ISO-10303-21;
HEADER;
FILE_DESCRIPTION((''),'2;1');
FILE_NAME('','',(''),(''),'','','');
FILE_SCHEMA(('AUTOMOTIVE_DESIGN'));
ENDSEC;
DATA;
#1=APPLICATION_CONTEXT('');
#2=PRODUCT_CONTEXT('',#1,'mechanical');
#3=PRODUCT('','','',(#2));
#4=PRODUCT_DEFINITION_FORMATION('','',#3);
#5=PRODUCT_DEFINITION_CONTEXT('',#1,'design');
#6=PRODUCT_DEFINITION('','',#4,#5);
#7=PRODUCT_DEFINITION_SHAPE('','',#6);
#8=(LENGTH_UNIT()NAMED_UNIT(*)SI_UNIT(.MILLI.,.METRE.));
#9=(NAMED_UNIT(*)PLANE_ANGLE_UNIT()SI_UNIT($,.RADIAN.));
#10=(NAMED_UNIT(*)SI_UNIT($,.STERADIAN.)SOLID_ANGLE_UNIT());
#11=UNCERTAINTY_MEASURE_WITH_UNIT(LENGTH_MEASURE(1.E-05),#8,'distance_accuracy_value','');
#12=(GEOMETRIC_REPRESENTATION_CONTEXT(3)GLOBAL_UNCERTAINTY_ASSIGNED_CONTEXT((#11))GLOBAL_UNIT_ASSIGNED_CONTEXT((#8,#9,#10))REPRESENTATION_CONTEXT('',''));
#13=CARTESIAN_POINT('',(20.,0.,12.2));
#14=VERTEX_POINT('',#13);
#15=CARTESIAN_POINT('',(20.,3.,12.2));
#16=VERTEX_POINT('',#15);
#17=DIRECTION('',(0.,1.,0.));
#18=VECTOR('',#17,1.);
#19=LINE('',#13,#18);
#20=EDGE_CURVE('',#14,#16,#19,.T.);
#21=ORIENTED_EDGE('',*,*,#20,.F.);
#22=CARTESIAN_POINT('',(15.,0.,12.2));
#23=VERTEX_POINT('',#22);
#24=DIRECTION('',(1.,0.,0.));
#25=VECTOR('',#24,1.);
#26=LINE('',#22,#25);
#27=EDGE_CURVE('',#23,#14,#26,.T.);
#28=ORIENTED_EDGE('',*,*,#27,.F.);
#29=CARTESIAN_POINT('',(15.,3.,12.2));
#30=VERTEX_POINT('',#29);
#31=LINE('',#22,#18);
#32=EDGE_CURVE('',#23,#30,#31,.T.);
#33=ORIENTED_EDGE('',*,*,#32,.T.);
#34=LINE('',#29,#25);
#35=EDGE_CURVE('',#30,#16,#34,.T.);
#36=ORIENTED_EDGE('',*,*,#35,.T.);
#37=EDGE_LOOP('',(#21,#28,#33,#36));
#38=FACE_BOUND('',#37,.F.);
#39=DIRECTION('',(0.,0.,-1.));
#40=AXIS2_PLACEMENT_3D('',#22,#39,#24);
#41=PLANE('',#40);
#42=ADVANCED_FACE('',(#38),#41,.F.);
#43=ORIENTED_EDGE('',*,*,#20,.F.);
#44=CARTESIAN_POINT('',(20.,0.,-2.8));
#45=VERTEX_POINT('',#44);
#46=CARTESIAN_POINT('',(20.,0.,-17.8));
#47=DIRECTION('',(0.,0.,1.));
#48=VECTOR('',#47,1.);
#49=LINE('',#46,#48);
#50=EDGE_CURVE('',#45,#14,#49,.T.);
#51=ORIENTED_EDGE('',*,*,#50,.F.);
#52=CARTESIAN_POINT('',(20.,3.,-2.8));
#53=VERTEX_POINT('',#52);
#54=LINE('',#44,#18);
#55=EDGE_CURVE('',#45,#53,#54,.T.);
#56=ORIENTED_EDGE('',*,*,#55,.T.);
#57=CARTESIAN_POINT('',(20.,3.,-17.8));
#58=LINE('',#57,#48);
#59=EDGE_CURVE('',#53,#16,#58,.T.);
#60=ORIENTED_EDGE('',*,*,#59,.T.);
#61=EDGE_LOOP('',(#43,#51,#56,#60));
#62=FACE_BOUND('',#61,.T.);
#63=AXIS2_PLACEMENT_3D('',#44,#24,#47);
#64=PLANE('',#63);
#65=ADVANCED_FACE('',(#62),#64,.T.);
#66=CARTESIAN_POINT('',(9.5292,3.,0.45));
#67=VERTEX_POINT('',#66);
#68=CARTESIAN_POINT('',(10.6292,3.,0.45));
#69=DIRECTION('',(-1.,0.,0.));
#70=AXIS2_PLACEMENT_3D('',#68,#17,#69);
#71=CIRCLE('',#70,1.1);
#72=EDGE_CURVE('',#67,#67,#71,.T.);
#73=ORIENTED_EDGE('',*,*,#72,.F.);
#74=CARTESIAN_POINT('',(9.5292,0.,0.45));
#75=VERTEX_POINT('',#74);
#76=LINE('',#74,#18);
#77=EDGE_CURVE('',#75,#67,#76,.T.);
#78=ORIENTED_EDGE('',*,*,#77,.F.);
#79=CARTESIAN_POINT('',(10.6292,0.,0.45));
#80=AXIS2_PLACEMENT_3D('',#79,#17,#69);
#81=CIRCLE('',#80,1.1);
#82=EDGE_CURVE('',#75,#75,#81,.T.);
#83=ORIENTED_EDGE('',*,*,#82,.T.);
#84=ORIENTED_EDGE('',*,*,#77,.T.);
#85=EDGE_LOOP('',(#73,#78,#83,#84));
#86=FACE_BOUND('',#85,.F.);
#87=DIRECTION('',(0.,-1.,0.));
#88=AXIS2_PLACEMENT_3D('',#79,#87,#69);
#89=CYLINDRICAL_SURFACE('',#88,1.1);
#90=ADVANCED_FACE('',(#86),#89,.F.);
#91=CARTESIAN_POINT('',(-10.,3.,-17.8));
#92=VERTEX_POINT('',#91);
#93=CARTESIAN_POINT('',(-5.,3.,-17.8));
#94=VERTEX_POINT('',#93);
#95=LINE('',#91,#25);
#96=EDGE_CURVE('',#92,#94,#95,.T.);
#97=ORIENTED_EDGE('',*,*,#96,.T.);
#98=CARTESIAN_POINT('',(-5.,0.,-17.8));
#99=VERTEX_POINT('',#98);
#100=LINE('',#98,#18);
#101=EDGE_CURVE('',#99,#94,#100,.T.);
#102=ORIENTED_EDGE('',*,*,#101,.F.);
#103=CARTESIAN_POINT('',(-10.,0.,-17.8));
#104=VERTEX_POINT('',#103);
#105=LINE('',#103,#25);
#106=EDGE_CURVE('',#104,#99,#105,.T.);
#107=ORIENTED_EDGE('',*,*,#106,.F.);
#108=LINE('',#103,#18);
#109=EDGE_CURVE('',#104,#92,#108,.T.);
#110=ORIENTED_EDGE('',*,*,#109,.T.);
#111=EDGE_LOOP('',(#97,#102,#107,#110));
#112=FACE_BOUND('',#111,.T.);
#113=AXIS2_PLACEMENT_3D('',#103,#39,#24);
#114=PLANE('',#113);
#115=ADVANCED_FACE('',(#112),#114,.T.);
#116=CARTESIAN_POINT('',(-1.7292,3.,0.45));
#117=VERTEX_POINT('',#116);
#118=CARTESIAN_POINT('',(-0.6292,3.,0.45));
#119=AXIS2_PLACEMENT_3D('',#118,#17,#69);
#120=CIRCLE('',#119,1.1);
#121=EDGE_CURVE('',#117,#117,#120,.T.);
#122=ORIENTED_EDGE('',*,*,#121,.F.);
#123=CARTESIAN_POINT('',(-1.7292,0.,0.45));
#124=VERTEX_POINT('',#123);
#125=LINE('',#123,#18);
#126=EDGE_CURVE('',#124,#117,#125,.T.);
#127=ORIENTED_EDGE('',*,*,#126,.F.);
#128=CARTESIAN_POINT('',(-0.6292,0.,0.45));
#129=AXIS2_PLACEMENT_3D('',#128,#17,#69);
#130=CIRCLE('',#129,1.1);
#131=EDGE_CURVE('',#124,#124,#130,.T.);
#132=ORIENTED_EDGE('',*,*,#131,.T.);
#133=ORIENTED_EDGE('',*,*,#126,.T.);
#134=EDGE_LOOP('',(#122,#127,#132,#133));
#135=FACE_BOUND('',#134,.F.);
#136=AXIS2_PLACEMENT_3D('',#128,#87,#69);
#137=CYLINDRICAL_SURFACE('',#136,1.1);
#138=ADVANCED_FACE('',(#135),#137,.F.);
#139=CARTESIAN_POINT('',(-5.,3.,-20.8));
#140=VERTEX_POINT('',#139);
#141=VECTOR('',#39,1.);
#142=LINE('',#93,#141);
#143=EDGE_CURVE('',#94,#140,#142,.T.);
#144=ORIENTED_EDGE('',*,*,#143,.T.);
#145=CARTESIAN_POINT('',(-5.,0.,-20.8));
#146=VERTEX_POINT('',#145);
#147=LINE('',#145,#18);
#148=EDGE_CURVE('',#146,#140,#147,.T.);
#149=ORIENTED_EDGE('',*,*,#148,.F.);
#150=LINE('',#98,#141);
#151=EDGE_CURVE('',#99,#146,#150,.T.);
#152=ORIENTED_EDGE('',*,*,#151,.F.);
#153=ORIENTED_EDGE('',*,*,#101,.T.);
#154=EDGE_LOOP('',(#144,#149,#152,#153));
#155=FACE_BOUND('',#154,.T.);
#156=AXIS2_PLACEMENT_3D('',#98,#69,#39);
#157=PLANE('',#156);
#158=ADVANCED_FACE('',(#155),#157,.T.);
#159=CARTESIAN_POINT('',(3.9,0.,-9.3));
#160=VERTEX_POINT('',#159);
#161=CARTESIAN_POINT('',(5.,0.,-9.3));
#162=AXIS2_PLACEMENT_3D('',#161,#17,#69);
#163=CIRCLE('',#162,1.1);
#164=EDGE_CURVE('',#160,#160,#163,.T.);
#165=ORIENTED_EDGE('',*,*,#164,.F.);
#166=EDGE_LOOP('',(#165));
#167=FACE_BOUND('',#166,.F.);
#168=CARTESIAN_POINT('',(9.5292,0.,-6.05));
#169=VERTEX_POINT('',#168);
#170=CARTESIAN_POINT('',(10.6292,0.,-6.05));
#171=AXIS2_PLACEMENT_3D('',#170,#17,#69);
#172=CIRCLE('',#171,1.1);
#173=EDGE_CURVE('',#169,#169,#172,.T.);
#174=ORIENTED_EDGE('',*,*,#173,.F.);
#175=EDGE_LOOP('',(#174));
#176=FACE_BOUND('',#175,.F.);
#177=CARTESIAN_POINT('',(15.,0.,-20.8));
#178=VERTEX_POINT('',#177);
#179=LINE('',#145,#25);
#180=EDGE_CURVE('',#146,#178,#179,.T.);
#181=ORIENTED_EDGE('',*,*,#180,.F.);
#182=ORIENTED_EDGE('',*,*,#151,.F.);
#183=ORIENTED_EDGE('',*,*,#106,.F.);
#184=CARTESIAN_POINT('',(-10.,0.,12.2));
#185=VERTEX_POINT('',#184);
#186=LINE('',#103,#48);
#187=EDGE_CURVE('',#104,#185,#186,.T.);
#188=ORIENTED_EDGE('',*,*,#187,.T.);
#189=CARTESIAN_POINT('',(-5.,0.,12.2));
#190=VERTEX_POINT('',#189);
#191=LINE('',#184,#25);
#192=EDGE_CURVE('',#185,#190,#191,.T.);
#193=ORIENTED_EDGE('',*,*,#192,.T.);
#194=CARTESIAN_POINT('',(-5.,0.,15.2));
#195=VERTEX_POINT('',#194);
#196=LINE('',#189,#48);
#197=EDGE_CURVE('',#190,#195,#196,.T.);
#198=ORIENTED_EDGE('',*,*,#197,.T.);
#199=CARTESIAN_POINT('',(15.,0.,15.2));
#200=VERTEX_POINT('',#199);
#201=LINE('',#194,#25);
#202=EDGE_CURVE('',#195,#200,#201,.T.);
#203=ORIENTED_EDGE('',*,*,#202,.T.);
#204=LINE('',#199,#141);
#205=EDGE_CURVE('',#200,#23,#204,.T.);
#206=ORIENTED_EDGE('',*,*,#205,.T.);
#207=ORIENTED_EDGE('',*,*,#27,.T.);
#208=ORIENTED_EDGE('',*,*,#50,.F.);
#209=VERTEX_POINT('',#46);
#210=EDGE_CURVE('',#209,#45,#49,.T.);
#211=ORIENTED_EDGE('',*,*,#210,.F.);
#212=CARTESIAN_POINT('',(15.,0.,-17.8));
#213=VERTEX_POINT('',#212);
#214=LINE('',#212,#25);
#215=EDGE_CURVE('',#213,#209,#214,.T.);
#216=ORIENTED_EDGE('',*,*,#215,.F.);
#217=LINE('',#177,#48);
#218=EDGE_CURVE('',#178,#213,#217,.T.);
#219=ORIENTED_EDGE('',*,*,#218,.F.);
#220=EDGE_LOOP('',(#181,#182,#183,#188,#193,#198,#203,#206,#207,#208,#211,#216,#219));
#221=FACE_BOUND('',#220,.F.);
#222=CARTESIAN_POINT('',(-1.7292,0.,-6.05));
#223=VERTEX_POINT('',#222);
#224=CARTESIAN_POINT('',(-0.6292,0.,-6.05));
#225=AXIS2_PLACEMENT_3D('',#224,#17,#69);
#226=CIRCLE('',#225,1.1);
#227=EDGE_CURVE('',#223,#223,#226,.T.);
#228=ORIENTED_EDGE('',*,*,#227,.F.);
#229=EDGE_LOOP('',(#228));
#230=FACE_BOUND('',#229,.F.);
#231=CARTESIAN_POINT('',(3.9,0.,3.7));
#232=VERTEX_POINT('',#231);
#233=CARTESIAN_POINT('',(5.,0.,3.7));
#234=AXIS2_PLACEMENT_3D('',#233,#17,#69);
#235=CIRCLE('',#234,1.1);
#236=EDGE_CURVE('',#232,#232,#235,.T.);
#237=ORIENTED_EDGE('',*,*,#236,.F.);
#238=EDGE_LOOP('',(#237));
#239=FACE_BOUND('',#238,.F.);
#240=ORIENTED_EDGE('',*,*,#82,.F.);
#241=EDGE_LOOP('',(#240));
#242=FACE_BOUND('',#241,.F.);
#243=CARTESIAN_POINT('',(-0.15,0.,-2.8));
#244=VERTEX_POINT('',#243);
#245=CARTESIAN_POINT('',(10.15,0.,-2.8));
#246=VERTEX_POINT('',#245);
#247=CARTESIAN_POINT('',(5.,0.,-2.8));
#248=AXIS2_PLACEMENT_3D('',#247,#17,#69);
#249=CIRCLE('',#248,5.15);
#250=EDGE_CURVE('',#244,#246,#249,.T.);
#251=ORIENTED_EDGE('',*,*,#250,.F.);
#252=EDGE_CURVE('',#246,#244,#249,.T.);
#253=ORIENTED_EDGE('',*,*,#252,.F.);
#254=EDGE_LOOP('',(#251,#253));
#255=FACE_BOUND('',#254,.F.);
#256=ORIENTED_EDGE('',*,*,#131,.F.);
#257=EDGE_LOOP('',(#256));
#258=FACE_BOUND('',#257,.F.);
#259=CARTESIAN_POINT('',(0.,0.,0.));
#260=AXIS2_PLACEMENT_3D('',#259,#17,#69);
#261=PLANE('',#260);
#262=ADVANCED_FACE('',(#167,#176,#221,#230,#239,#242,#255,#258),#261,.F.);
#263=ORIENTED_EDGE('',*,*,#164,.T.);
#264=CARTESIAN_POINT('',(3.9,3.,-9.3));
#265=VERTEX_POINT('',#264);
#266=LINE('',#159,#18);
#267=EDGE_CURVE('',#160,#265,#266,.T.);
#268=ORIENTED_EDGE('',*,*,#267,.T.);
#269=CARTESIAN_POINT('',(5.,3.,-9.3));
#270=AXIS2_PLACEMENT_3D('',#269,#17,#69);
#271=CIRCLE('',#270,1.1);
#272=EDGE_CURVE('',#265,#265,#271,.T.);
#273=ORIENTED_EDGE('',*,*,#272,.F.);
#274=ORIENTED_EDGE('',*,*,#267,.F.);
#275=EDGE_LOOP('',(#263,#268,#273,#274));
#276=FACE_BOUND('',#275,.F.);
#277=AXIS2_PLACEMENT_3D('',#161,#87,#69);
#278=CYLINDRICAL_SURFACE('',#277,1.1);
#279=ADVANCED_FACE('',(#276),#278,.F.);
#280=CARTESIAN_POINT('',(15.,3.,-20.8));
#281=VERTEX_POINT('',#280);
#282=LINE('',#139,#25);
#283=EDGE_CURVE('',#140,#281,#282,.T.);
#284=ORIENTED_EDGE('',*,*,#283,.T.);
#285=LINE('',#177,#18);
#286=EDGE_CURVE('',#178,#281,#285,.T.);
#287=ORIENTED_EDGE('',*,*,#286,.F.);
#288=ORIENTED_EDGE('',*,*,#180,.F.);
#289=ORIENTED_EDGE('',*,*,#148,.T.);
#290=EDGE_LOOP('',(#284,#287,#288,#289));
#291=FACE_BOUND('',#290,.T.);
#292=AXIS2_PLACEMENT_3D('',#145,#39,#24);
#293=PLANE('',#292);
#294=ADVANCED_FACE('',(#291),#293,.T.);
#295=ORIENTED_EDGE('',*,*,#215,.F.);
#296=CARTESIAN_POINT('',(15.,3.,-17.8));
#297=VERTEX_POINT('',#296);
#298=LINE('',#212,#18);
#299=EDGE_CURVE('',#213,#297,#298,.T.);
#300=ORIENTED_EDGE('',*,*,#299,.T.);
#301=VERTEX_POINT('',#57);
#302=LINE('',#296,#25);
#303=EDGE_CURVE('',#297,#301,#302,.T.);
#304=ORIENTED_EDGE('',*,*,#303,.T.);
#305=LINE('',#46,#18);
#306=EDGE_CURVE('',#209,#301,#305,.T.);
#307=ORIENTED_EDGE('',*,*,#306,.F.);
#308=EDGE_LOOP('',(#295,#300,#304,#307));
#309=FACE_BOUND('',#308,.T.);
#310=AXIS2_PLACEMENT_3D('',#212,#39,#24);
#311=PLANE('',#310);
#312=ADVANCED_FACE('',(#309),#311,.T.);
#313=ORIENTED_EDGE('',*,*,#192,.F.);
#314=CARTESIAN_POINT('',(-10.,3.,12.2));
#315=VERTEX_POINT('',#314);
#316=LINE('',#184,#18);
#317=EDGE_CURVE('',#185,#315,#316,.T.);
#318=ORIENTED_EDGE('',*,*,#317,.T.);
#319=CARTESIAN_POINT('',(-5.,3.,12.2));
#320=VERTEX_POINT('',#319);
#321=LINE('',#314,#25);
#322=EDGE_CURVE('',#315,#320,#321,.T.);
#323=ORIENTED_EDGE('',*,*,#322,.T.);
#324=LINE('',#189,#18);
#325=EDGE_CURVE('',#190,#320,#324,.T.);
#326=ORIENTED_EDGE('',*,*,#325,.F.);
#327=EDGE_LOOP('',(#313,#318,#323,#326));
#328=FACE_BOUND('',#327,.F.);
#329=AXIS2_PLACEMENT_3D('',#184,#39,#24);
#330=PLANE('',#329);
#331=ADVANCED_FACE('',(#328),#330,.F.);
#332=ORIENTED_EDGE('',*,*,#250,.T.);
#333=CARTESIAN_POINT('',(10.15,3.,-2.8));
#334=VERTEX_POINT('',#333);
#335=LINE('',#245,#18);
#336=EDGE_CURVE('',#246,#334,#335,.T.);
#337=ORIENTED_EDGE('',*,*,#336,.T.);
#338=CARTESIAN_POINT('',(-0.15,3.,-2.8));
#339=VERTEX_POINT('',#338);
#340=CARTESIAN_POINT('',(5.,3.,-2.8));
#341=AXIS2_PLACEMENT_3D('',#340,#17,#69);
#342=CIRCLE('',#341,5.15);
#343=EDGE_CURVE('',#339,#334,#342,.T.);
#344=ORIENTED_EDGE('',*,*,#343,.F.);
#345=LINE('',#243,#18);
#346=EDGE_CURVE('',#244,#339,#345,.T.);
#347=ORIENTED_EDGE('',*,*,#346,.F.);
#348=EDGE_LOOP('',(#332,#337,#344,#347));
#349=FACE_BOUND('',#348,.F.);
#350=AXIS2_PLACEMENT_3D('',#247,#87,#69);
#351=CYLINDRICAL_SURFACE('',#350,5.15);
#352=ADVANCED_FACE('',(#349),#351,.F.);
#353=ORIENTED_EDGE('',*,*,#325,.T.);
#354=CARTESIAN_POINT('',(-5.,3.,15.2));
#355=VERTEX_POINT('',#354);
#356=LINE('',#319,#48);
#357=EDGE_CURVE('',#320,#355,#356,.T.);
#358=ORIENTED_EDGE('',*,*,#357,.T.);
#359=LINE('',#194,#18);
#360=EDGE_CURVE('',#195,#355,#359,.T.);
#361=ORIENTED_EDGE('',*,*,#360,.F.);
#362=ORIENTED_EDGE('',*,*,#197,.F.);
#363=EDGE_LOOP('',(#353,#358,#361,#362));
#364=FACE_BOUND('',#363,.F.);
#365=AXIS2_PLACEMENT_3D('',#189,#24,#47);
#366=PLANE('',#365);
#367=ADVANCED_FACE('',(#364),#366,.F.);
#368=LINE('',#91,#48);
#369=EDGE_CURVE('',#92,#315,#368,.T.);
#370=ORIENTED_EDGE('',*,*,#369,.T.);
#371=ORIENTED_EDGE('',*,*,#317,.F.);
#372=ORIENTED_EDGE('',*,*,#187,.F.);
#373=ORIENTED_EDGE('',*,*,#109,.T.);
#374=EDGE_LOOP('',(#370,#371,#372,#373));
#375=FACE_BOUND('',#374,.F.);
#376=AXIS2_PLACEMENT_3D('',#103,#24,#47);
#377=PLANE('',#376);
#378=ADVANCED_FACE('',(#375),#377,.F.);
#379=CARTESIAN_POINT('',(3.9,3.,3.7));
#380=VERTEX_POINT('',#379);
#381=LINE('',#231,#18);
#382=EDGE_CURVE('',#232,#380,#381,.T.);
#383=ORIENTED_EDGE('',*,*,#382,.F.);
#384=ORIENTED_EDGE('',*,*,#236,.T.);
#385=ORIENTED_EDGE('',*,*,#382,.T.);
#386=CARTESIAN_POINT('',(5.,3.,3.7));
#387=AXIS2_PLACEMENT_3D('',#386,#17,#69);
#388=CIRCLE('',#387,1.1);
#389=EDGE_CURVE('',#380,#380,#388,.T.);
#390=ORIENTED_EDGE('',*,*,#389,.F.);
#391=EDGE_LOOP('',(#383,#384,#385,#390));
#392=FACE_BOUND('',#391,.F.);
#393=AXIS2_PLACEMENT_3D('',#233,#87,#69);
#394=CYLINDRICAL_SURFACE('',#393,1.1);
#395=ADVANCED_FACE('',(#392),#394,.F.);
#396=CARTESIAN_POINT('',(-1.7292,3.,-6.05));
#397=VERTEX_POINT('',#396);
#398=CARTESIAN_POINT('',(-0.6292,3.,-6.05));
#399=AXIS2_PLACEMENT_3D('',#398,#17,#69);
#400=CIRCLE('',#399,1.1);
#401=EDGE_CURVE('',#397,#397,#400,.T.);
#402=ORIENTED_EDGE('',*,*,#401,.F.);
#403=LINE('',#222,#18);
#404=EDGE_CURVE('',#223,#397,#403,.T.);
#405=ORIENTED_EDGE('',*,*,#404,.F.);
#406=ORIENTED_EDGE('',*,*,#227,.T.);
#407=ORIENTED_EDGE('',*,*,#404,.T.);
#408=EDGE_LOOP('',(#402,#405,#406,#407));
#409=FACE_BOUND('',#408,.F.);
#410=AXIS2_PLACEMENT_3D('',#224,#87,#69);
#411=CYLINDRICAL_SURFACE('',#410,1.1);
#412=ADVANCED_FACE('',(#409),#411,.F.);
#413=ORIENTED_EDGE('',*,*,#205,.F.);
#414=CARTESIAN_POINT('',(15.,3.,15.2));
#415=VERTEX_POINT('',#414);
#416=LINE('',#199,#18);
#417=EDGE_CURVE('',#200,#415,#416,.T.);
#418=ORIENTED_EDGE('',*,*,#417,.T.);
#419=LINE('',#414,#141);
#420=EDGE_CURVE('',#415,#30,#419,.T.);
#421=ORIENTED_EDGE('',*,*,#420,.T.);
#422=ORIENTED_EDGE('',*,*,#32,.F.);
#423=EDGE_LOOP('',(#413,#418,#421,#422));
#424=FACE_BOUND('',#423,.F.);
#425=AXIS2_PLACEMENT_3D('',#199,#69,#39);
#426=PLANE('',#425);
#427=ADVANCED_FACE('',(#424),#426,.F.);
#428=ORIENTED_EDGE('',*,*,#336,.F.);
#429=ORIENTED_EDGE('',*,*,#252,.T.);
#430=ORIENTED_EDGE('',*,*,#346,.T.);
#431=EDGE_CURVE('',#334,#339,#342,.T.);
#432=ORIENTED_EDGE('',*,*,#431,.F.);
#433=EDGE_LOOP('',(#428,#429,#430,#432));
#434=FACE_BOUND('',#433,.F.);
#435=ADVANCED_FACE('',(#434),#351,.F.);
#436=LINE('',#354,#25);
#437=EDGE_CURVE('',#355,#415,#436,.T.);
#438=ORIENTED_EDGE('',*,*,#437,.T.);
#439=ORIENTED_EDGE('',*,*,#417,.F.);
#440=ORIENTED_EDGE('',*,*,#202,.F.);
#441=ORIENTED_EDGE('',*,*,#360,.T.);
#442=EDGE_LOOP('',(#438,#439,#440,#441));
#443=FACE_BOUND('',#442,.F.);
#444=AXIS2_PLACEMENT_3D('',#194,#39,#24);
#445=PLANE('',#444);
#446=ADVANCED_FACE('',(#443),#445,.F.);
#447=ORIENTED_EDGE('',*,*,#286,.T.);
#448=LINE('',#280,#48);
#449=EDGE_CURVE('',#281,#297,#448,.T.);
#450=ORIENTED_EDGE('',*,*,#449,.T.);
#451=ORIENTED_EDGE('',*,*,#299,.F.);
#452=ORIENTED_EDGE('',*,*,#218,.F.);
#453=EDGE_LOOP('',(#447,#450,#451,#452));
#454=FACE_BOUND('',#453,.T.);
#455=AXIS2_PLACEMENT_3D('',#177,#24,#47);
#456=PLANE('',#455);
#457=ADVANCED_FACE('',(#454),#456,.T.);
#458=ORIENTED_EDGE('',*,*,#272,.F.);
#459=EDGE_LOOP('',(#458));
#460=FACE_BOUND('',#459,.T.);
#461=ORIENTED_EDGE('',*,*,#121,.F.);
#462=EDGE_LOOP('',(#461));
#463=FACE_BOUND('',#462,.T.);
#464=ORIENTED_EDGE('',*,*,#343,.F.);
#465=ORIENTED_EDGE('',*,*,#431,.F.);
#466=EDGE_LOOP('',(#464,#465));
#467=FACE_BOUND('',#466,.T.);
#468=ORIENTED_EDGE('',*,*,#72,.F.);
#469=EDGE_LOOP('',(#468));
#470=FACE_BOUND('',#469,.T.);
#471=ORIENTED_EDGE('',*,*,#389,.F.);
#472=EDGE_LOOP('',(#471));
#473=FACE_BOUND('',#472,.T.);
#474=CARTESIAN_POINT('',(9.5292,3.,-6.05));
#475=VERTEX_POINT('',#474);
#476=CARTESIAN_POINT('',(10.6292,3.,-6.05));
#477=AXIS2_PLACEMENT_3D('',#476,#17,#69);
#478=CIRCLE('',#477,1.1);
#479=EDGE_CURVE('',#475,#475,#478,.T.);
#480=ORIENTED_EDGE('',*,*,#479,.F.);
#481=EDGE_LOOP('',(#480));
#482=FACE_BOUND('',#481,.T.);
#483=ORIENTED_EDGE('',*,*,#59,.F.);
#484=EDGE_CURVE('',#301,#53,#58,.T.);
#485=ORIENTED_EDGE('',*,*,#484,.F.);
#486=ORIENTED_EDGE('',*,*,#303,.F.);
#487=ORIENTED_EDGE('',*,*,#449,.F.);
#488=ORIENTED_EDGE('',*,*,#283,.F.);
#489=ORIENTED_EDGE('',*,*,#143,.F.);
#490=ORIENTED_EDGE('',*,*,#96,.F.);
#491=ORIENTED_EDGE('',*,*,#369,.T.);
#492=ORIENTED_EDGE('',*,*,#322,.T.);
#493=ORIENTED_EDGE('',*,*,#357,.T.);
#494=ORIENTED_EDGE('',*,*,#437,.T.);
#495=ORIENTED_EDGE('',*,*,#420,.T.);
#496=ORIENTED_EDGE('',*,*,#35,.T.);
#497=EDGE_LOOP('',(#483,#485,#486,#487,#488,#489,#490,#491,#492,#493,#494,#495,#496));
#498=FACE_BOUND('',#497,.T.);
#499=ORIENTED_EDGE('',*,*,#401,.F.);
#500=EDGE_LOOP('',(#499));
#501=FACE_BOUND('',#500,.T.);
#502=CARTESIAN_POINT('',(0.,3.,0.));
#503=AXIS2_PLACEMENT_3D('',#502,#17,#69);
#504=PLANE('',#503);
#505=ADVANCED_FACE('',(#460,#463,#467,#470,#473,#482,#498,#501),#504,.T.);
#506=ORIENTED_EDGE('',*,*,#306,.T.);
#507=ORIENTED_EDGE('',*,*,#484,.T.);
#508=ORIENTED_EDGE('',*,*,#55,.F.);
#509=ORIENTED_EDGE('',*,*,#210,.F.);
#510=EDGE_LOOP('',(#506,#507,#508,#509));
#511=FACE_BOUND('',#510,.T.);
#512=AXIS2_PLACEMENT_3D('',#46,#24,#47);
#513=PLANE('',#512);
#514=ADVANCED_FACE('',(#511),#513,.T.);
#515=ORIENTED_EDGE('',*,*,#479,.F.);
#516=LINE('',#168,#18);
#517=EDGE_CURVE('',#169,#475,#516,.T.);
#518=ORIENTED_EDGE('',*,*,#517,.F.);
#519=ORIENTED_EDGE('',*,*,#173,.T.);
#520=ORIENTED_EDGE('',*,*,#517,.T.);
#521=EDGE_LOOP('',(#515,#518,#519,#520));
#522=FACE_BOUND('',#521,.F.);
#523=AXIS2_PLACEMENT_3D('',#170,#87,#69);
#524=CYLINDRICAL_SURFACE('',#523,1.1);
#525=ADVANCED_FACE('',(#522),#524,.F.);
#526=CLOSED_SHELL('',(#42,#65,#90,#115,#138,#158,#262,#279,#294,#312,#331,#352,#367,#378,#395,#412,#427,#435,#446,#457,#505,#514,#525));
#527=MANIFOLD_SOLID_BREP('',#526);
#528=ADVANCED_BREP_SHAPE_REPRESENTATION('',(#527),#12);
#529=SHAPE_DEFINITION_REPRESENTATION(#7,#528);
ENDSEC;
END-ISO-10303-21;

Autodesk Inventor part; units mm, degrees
ref_plane "YZ Plane" through (0, 0, 0) normal (1, 0, 0) x (0, 1, 0)
ref_plane "XZ Plane" through (0, 0, 0) normal (0, 1, 0) x (-1, 0, 0)
ref_plane "XY Plane" through (0, 0, 0) normal (0, 0, 1) x (1, 0, 0)
sketch "Sketch1" plane through (0, 0, 0) normal (0, 1, 0) x (-1, 0, 0)
  circle A0 centre (-5, -2.8) radius 5.15
  line L0 (10, -17.8) -> (10, 12.2)
  line L1 (-20, -17.8) -> (-20, 12.2)
  line L2 (10, 12.2) -> (5, 12.2)
  line L3 (5, 12.2) -> (5, 15.2)
  line L4 (-15, 15.2) -> (-15, 12.2)
  circle A1 centre (-5, 3.7) radius 1.1
  circle A2 centre (-10.6292, 0.45) radius 1.1
  circle A3 centre (-10.6292, -6.05) radius 1.1
  circle A4 centre (-5, -9.3) radius 1.1
  circle A5 centre (0.6292, -6.05) radius 1.1
  circle A6 centre (0.6292, 0.45) radius 1.1
  line L5 (-15, 12.2) -> (-20, 12.2)
  line L6 (5, 15.2) -> (-15, 15.2)
  line L7 (10, -17.8) -> (5, -17.8)
  line L8 (5, -17.8) -> (5, -20.8)
  line L9 (5, -20.8) -> (-15, -20.8)
  line L10 (-15, -20.8) -> (-15, -17.8)
  line L11 (-15, -17.8) -> (-20, -17.8)
  line L12 (-20, -17.8) -> (-20, -2.8)
  line L13 (-20, -2.8) -> (-5, -2.8)
  dimension "d7" = 360
  dimension "d42" = 30
  dimension "d43" = 5
  dimension "d44" = 3
  dimension "d49" = 2.2
  dimension "d52" = 360
  dimension "d57" = 30
  dimension "d59" = 5
  dimension "d60" = 3
  dimension "d61" = 20
  dimension "d62" = 15
extrude "Extrusion1" add sketch "Sketch1" along normal blind 3
properties part number "Motor Mount" material "PVC, Unplasticized"
